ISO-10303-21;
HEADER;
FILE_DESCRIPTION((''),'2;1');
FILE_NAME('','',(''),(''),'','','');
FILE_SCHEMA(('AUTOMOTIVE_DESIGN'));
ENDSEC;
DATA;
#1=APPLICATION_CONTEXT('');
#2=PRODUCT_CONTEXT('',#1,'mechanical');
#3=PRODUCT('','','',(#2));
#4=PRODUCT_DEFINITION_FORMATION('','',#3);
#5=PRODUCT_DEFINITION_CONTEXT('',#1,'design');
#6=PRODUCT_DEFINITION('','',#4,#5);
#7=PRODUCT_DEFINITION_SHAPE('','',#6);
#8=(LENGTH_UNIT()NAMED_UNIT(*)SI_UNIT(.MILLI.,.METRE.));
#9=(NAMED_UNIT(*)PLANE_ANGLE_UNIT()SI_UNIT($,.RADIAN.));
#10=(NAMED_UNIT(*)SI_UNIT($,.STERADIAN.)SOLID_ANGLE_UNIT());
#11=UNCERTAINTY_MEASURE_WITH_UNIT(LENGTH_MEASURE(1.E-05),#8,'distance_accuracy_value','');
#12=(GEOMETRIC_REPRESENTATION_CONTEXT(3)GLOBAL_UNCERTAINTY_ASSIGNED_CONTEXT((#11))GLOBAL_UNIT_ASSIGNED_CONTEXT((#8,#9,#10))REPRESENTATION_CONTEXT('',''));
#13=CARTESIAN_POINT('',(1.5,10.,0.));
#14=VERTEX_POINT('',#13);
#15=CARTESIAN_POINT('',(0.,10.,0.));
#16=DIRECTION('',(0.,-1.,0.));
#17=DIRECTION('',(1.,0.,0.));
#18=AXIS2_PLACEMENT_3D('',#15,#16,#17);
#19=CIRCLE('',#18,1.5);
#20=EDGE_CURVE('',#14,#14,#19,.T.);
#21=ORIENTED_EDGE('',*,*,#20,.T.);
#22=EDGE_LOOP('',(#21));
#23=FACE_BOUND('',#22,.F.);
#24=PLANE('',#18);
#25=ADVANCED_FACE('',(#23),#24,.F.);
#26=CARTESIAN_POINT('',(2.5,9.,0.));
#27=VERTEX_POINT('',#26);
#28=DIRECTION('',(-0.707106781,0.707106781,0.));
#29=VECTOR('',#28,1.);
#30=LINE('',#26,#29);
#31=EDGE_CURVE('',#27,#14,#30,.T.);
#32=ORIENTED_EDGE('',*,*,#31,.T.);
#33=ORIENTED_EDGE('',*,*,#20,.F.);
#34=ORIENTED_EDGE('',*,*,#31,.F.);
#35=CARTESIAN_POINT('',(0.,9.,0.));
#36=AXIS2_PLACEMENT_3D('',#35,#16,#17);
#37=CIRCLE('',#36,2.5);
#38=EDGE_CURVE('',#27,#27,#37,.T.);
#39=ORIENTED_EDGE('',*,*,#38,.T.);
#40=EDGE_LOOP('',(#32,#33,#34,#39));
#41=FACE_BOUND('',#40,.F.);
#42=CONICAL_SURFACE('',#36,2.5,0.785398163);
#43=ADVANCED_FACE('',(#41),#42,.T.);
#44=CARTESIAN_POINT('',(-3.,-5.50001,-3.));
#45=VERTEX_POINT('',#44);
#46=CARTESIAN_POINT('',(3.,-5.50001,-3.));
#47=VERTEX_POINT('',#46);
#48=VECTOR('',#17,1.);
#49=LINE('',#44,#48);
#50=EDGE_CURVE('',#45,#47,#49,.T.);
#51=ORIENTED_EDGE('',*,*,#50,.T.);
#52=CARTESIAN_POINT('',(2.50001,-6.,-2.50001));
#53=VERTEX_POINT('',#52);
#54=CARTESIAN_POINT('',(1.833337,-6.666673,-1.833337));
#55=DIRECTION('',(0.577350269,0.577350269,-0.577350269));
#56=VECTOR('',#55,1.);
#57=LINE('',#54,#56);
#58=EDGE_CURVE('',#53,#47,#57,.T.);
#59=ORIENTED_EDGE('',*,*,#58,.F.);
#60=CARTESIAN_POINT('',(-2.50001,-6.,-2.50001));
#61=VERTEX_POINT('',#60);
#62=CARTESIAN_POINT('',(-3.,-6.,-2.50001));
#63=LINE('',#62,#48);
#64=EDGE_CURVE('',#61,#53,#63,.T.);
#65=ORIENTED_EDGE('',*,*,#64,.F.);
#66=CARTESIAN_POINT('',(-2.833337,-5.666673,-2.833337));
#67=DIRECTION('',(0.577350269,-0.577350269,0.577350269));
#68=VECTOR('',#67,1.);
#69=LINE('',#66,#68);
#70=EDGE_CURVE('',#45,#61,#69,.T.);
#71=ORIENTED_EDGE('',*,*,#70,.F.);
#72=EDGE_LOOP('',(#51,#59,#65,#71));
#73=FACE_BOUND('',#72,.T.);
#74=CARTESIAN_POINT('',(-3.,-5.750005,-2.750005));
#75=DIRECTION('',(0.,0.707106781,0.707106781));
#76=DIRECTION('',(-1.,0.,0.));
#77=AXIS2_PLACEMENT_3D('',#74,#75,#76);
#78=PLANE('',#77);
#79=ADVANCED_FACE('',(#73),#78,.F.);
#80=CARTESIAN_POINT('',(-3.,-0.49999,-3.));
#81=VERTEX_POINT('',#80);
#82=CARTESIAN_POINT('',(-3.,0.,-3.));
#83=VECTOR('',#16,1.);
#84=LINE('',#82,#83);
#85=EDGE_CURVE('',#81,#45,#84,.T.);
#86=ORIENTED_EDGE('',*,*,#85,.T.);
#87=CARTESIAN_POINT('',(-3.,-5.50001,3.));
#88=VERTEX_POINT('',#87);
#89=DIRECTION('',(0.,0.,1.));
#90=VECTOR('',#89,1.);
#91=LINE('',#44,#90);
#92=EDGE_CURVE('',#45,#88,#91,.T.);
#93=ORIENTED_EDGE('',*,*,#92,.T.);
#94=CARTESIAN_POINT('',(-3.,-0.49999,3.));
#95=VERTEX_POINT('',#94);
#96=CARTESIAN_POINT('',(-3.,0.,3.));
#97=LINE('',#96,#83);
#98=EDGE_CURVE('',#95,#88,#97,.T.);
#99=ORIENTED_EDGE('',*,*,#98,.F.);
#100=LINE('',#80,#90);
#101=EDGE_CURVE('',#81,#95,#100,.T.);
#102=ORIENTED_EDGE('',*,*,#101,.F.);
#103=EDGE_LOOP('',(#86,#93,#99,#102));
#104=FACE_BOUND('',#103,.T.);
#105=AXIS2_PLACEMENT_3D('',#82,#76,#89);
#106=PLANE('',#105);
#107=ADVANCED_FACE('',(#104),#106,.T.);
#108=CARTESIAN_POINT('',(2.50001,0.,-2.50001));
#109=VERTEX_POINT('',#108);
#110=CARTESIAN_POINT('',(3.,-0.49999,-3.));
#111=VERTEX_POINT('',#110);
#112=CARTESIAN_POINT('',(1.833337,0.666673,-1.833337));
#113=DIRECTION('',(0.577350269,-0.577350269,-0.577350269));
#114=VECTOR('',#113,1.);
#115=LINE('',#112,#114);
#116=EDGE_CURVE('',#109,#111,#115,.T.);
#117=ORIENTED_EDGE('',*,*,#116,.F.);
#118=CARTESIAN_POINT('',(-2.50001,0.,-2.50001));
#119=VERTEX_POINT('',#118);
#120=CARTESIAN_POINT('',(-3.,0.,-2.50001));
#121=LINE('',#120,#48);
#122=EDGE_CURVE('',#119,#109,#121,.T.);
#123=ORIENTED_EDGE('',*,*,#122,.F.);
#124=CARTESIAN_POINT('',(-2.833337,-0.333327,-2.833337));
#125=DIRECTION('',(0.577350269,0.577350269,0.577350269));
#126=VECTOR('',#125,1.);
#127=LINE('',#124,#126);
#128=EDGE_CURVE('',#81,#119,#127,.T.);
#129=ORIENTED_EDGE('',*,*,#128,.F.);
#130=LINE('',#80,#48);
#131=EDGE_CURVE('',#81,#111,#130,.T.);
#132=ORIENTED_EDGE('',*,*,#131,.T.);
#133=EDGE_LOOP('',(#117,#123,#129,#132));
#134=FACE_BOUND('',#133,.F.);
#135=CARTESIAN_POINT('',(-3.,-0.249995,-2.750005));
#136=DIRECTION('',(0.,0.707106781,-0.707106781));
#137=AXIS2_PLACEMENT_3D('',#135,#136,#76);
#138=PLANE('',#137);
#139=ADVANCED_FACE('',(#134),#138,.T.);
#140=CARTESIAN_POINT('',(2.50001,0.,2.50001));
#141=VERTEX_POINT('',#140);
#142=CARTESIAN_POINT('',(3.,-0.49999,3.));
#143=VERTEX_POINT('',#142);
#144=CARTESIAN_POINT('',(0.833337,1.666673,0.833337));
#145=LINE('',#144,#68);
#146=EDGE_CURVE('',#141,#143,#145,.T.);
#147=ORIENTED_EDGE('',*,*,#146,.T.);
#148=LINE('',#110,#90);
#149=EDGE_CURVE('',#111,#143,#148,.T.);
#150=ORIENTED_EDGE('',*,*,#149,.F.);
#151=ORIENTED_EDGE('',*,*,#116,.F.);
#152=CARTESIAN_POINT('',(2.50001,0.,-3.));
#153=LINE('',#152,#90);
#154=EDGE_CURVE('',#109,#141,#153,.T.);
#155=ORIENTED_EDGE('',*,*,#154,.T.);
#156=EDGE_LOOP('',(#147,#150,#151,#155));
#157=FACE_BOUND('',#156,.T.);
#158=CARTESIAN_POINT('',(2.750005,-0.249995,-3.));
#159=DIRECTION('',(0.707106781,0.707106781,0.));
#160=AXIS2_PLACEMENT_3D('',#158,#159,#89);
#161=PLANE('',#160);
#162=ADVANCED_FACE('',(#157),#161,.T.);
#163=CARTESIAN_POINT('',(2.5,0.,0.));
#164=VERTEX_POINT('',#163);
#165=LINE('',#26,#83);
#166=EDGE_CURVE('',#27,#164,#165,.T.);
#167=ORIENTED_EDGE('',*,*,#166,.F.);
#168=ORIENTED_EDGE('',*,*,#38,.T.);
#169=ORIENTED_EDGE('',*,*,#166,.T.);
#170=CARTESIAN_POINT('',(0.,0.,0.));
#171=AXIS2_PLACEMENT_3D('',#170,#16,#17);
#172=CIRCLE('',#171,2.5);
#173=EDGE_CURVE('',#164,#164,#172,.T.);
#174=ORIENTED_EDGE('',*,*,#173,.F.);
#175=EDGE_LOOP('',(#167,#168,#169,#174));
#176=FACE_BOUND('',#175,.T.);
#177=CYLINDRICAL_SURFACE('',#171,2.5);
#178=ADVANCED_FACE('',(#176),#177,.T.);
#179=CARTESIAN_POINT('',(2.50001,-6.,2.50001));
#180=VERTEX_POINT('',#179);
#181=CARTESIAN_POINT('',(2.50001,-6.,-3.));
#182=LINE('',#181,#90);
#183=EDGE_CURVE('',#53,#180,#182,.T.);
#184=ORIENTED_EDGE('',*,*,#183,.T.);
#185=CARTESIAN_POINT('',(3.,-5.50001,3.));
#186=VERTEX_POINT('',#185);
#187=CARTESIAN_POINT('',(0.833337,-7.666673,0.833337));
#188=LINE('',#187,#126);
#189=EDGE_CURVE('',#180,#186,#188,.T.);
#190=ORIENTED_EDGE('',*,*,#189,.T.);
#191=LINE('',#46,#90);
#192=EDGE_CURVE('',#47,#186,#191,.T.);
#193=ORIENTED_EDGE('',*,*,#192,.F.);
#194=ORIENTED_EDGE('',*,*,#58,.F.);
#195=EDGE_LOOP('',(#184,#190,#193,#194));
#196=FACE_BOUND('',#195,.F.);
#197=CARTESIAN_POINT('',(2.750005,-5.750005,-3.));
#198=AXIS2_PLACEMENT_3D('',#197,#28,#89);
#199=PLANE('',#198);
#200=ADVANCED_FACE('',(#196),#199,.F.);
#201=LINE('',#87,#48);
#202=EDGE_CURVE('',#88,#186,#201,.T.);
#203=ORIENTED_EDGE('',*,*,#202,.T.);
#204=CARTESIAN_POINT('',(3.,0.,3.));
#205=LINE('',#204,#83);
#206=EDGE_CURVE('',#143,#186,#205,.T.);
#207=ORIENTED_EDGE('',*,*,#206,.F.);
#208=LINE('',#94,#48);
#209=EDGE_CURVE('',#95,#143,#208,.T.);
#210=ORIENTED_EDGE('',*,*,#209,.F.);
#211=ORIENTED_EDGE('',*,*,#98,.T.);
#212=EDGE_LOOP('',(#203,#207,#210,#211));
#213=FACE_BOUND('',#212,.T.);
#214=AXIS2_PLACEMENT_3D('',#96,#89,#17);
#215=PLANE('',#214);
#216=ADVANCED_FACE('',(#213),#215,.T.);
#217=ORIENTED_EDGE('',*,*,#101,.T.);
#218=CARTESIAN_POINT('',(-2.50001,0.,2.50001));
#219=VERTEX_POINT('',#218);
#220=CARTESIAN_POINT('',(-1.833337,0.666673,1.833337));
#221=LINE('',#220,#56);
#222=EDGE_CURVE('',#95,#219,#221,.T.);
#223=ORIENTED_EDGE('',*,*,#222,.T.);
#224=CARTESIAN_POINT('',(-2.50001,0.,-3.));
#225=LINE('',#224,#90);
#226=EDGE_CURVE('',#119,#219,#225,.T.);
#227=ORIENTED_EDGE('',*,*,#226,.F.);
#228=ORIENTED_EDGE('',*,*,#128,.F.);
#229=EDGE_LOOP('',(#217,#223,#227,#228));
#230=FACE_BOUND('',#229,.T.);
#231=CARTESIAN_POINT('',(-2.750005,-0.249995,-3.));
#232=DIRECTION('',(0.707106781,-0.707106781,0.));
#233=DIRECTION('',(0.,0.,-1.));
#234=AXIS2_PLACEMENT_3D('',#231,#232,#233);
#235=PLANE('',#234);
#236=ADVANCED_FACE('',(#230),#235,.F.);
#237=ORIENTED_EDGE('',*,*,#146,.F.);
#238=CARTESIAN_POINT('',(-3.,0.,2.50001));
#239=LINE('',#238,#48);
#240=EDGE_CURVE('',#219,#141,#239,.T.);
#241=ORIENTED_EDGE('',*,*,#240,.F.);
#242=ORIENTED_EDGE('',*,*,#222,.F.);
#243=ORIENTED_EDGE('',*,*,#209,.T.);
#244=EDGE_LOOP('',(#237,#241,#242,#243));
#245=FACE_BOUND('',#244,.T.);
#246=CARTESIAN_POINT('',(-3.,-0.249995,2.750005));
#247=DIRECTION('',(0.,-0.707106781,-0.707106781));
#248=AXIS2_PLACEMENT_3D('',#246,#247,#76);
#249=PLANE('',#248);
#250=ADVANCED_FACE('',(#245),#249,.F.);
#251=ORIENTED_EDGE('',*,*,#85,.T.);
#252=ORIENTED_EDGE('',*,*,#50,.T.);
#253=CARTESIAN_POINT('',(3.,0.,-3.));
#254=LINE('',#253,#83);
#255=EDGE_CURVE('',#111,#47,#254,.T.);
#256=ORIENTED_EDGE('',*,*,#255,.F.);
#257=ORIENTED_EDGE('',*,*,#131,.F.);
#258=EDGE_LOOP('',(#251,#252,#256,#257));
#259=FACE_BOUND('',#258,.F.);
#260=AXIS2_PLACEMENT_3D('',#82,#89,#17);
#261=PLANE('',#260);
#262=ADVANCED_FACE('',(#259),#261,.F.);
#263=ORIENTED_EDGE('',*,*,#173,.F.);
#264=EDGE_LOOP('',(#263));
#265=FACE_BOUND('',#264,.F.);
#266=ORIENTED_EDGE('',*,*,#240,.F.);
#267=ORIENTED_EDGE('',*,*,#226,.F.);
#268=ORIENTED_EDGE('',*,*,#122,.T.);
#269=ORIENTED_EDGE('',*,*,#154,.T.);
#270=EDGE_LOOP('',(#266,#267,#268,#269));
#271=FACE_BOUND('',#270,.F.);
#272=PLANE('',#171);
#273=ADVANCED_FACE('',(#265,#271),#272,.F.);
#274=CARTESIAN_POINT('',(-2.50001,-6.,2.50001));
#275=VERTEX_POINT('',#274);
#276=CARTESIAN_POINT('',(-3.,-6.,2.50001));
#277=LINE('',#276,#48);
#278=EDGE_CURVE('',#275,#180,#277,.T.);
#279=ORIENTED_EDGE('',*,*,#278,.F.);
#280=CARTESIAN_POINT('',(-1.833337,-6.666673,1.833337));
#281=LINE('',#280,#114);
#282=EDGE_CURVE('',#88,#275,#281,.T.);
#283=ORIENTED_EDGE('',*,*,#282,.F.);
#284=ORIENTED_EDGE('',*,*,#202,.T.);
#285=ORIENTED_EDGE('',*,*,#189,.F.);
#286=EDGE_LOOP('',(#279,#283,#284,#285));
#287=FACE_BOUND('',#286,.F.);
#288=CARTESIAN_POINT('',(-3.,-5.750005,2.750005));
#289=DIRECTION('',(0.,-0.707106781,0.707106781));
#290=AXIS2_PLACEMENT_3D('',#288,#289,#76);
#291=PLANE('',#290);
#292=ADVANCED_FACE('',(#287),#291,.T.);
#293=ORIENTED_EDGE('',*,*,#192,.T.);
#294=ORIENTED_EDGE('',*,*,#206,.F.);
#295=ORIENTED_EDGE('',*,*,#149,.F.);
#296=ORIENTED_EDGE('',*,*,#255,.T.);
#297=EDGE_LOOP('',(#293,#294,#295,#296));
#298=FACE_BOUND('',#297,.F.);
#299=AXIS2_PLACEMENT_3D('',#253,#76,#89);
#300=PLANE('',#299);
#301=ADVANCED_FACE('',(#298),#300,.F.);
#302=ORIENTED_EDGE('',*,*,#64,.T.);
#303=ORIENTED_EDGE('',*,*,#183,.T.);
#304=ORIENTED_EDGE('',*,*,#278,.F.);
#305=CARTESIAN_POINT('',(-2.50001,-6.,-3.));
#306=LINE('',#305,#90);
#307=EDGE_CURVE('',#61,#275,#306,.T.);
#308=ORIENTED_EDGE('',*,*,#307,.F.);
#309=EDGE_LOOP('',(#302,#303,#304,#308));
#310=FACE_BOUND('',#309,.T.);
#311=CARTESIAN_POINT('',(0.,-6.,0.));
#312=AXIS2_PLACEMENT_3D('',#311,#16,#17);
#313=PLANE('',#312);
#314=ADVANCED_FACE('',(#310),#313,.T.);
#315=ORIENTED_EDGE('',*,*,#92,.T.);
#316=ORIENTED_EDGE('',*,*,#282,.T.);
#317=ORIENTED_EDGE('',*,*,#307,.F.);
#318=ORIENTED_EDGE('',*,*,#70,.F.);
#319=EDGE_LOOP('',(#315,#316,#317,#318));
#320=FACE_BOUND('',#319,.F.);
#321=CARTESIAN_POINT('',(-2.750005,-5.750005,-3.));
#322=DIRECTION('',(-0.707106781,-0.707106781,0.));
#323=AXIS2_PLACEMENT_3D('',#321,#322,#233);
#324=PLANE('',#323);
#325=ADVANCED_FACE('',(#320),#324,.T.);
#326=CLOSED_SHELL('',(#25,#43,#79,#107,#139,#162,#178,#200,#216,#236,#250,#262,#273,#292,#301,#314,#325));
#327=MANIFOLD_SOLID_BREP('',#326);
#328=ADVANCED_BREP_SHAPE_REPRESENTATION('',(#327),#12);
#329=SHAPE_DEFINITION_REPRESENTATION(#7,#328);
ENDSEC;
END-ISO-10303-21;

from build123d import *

# Parameters (mm, degrees)
F0_R          = 2.5
F1_DEPTH      = 10
F1_DEPTH_BACK = 6
F2_SIZE       = 1
F0_W          = 6
F0_H          = 6
F3_DEPTH      = 6
F4_SIZE       = 0.49999


# Not quite as in the source:
# - a fillet or chamfer is up to 0.001 mm smaller than in the source, because OpenCascade refuses the exact size


with BuildPart() as f1:
    # F0 (on Front) → F1 (new body, two sides)
    with BuildSketch(Plane.XZ) as f1_sk:
        Circle(F0_R)
    extrude(amount=-F1_DEPTH)
    extrude(f1_sk.sketch, amount=F1_DEPTH_BACK)

    # F2
    f2_edges = [f1.edges().sort_by_distance(p)[0] for p in [
        (-2.5, 10, 0),
    ]]
    chamfer(f2_edges, length=F2_SIZE)

    # F0 (on Front) → F3 (join)
    with BuildSketch(Plane.XZ):
        Rectangle(F0_W, F0_H)
        Circle(F0_R, mode=Mode.SUBTRACT)
    extrude(amount=F3_DEPTH)

    # F4 (size 0.5 in the source; OpenCascade refuses exactly that, so slightly less here)
    f4_edges = [f1.edges().sort_by_distance(p)[0] for p in [
        (3, -6, 0),
        (0, -6, 3),
        (-3, -6, 0),
        (0, -6, -3),
        (3, 0, 0),
        (-3, 0, 0),
        (0, 0, 3),
        (0, 0, -3),
    ]]
    chamfer(f4_edges, length=F4_SIZE)


solid = f1.part
